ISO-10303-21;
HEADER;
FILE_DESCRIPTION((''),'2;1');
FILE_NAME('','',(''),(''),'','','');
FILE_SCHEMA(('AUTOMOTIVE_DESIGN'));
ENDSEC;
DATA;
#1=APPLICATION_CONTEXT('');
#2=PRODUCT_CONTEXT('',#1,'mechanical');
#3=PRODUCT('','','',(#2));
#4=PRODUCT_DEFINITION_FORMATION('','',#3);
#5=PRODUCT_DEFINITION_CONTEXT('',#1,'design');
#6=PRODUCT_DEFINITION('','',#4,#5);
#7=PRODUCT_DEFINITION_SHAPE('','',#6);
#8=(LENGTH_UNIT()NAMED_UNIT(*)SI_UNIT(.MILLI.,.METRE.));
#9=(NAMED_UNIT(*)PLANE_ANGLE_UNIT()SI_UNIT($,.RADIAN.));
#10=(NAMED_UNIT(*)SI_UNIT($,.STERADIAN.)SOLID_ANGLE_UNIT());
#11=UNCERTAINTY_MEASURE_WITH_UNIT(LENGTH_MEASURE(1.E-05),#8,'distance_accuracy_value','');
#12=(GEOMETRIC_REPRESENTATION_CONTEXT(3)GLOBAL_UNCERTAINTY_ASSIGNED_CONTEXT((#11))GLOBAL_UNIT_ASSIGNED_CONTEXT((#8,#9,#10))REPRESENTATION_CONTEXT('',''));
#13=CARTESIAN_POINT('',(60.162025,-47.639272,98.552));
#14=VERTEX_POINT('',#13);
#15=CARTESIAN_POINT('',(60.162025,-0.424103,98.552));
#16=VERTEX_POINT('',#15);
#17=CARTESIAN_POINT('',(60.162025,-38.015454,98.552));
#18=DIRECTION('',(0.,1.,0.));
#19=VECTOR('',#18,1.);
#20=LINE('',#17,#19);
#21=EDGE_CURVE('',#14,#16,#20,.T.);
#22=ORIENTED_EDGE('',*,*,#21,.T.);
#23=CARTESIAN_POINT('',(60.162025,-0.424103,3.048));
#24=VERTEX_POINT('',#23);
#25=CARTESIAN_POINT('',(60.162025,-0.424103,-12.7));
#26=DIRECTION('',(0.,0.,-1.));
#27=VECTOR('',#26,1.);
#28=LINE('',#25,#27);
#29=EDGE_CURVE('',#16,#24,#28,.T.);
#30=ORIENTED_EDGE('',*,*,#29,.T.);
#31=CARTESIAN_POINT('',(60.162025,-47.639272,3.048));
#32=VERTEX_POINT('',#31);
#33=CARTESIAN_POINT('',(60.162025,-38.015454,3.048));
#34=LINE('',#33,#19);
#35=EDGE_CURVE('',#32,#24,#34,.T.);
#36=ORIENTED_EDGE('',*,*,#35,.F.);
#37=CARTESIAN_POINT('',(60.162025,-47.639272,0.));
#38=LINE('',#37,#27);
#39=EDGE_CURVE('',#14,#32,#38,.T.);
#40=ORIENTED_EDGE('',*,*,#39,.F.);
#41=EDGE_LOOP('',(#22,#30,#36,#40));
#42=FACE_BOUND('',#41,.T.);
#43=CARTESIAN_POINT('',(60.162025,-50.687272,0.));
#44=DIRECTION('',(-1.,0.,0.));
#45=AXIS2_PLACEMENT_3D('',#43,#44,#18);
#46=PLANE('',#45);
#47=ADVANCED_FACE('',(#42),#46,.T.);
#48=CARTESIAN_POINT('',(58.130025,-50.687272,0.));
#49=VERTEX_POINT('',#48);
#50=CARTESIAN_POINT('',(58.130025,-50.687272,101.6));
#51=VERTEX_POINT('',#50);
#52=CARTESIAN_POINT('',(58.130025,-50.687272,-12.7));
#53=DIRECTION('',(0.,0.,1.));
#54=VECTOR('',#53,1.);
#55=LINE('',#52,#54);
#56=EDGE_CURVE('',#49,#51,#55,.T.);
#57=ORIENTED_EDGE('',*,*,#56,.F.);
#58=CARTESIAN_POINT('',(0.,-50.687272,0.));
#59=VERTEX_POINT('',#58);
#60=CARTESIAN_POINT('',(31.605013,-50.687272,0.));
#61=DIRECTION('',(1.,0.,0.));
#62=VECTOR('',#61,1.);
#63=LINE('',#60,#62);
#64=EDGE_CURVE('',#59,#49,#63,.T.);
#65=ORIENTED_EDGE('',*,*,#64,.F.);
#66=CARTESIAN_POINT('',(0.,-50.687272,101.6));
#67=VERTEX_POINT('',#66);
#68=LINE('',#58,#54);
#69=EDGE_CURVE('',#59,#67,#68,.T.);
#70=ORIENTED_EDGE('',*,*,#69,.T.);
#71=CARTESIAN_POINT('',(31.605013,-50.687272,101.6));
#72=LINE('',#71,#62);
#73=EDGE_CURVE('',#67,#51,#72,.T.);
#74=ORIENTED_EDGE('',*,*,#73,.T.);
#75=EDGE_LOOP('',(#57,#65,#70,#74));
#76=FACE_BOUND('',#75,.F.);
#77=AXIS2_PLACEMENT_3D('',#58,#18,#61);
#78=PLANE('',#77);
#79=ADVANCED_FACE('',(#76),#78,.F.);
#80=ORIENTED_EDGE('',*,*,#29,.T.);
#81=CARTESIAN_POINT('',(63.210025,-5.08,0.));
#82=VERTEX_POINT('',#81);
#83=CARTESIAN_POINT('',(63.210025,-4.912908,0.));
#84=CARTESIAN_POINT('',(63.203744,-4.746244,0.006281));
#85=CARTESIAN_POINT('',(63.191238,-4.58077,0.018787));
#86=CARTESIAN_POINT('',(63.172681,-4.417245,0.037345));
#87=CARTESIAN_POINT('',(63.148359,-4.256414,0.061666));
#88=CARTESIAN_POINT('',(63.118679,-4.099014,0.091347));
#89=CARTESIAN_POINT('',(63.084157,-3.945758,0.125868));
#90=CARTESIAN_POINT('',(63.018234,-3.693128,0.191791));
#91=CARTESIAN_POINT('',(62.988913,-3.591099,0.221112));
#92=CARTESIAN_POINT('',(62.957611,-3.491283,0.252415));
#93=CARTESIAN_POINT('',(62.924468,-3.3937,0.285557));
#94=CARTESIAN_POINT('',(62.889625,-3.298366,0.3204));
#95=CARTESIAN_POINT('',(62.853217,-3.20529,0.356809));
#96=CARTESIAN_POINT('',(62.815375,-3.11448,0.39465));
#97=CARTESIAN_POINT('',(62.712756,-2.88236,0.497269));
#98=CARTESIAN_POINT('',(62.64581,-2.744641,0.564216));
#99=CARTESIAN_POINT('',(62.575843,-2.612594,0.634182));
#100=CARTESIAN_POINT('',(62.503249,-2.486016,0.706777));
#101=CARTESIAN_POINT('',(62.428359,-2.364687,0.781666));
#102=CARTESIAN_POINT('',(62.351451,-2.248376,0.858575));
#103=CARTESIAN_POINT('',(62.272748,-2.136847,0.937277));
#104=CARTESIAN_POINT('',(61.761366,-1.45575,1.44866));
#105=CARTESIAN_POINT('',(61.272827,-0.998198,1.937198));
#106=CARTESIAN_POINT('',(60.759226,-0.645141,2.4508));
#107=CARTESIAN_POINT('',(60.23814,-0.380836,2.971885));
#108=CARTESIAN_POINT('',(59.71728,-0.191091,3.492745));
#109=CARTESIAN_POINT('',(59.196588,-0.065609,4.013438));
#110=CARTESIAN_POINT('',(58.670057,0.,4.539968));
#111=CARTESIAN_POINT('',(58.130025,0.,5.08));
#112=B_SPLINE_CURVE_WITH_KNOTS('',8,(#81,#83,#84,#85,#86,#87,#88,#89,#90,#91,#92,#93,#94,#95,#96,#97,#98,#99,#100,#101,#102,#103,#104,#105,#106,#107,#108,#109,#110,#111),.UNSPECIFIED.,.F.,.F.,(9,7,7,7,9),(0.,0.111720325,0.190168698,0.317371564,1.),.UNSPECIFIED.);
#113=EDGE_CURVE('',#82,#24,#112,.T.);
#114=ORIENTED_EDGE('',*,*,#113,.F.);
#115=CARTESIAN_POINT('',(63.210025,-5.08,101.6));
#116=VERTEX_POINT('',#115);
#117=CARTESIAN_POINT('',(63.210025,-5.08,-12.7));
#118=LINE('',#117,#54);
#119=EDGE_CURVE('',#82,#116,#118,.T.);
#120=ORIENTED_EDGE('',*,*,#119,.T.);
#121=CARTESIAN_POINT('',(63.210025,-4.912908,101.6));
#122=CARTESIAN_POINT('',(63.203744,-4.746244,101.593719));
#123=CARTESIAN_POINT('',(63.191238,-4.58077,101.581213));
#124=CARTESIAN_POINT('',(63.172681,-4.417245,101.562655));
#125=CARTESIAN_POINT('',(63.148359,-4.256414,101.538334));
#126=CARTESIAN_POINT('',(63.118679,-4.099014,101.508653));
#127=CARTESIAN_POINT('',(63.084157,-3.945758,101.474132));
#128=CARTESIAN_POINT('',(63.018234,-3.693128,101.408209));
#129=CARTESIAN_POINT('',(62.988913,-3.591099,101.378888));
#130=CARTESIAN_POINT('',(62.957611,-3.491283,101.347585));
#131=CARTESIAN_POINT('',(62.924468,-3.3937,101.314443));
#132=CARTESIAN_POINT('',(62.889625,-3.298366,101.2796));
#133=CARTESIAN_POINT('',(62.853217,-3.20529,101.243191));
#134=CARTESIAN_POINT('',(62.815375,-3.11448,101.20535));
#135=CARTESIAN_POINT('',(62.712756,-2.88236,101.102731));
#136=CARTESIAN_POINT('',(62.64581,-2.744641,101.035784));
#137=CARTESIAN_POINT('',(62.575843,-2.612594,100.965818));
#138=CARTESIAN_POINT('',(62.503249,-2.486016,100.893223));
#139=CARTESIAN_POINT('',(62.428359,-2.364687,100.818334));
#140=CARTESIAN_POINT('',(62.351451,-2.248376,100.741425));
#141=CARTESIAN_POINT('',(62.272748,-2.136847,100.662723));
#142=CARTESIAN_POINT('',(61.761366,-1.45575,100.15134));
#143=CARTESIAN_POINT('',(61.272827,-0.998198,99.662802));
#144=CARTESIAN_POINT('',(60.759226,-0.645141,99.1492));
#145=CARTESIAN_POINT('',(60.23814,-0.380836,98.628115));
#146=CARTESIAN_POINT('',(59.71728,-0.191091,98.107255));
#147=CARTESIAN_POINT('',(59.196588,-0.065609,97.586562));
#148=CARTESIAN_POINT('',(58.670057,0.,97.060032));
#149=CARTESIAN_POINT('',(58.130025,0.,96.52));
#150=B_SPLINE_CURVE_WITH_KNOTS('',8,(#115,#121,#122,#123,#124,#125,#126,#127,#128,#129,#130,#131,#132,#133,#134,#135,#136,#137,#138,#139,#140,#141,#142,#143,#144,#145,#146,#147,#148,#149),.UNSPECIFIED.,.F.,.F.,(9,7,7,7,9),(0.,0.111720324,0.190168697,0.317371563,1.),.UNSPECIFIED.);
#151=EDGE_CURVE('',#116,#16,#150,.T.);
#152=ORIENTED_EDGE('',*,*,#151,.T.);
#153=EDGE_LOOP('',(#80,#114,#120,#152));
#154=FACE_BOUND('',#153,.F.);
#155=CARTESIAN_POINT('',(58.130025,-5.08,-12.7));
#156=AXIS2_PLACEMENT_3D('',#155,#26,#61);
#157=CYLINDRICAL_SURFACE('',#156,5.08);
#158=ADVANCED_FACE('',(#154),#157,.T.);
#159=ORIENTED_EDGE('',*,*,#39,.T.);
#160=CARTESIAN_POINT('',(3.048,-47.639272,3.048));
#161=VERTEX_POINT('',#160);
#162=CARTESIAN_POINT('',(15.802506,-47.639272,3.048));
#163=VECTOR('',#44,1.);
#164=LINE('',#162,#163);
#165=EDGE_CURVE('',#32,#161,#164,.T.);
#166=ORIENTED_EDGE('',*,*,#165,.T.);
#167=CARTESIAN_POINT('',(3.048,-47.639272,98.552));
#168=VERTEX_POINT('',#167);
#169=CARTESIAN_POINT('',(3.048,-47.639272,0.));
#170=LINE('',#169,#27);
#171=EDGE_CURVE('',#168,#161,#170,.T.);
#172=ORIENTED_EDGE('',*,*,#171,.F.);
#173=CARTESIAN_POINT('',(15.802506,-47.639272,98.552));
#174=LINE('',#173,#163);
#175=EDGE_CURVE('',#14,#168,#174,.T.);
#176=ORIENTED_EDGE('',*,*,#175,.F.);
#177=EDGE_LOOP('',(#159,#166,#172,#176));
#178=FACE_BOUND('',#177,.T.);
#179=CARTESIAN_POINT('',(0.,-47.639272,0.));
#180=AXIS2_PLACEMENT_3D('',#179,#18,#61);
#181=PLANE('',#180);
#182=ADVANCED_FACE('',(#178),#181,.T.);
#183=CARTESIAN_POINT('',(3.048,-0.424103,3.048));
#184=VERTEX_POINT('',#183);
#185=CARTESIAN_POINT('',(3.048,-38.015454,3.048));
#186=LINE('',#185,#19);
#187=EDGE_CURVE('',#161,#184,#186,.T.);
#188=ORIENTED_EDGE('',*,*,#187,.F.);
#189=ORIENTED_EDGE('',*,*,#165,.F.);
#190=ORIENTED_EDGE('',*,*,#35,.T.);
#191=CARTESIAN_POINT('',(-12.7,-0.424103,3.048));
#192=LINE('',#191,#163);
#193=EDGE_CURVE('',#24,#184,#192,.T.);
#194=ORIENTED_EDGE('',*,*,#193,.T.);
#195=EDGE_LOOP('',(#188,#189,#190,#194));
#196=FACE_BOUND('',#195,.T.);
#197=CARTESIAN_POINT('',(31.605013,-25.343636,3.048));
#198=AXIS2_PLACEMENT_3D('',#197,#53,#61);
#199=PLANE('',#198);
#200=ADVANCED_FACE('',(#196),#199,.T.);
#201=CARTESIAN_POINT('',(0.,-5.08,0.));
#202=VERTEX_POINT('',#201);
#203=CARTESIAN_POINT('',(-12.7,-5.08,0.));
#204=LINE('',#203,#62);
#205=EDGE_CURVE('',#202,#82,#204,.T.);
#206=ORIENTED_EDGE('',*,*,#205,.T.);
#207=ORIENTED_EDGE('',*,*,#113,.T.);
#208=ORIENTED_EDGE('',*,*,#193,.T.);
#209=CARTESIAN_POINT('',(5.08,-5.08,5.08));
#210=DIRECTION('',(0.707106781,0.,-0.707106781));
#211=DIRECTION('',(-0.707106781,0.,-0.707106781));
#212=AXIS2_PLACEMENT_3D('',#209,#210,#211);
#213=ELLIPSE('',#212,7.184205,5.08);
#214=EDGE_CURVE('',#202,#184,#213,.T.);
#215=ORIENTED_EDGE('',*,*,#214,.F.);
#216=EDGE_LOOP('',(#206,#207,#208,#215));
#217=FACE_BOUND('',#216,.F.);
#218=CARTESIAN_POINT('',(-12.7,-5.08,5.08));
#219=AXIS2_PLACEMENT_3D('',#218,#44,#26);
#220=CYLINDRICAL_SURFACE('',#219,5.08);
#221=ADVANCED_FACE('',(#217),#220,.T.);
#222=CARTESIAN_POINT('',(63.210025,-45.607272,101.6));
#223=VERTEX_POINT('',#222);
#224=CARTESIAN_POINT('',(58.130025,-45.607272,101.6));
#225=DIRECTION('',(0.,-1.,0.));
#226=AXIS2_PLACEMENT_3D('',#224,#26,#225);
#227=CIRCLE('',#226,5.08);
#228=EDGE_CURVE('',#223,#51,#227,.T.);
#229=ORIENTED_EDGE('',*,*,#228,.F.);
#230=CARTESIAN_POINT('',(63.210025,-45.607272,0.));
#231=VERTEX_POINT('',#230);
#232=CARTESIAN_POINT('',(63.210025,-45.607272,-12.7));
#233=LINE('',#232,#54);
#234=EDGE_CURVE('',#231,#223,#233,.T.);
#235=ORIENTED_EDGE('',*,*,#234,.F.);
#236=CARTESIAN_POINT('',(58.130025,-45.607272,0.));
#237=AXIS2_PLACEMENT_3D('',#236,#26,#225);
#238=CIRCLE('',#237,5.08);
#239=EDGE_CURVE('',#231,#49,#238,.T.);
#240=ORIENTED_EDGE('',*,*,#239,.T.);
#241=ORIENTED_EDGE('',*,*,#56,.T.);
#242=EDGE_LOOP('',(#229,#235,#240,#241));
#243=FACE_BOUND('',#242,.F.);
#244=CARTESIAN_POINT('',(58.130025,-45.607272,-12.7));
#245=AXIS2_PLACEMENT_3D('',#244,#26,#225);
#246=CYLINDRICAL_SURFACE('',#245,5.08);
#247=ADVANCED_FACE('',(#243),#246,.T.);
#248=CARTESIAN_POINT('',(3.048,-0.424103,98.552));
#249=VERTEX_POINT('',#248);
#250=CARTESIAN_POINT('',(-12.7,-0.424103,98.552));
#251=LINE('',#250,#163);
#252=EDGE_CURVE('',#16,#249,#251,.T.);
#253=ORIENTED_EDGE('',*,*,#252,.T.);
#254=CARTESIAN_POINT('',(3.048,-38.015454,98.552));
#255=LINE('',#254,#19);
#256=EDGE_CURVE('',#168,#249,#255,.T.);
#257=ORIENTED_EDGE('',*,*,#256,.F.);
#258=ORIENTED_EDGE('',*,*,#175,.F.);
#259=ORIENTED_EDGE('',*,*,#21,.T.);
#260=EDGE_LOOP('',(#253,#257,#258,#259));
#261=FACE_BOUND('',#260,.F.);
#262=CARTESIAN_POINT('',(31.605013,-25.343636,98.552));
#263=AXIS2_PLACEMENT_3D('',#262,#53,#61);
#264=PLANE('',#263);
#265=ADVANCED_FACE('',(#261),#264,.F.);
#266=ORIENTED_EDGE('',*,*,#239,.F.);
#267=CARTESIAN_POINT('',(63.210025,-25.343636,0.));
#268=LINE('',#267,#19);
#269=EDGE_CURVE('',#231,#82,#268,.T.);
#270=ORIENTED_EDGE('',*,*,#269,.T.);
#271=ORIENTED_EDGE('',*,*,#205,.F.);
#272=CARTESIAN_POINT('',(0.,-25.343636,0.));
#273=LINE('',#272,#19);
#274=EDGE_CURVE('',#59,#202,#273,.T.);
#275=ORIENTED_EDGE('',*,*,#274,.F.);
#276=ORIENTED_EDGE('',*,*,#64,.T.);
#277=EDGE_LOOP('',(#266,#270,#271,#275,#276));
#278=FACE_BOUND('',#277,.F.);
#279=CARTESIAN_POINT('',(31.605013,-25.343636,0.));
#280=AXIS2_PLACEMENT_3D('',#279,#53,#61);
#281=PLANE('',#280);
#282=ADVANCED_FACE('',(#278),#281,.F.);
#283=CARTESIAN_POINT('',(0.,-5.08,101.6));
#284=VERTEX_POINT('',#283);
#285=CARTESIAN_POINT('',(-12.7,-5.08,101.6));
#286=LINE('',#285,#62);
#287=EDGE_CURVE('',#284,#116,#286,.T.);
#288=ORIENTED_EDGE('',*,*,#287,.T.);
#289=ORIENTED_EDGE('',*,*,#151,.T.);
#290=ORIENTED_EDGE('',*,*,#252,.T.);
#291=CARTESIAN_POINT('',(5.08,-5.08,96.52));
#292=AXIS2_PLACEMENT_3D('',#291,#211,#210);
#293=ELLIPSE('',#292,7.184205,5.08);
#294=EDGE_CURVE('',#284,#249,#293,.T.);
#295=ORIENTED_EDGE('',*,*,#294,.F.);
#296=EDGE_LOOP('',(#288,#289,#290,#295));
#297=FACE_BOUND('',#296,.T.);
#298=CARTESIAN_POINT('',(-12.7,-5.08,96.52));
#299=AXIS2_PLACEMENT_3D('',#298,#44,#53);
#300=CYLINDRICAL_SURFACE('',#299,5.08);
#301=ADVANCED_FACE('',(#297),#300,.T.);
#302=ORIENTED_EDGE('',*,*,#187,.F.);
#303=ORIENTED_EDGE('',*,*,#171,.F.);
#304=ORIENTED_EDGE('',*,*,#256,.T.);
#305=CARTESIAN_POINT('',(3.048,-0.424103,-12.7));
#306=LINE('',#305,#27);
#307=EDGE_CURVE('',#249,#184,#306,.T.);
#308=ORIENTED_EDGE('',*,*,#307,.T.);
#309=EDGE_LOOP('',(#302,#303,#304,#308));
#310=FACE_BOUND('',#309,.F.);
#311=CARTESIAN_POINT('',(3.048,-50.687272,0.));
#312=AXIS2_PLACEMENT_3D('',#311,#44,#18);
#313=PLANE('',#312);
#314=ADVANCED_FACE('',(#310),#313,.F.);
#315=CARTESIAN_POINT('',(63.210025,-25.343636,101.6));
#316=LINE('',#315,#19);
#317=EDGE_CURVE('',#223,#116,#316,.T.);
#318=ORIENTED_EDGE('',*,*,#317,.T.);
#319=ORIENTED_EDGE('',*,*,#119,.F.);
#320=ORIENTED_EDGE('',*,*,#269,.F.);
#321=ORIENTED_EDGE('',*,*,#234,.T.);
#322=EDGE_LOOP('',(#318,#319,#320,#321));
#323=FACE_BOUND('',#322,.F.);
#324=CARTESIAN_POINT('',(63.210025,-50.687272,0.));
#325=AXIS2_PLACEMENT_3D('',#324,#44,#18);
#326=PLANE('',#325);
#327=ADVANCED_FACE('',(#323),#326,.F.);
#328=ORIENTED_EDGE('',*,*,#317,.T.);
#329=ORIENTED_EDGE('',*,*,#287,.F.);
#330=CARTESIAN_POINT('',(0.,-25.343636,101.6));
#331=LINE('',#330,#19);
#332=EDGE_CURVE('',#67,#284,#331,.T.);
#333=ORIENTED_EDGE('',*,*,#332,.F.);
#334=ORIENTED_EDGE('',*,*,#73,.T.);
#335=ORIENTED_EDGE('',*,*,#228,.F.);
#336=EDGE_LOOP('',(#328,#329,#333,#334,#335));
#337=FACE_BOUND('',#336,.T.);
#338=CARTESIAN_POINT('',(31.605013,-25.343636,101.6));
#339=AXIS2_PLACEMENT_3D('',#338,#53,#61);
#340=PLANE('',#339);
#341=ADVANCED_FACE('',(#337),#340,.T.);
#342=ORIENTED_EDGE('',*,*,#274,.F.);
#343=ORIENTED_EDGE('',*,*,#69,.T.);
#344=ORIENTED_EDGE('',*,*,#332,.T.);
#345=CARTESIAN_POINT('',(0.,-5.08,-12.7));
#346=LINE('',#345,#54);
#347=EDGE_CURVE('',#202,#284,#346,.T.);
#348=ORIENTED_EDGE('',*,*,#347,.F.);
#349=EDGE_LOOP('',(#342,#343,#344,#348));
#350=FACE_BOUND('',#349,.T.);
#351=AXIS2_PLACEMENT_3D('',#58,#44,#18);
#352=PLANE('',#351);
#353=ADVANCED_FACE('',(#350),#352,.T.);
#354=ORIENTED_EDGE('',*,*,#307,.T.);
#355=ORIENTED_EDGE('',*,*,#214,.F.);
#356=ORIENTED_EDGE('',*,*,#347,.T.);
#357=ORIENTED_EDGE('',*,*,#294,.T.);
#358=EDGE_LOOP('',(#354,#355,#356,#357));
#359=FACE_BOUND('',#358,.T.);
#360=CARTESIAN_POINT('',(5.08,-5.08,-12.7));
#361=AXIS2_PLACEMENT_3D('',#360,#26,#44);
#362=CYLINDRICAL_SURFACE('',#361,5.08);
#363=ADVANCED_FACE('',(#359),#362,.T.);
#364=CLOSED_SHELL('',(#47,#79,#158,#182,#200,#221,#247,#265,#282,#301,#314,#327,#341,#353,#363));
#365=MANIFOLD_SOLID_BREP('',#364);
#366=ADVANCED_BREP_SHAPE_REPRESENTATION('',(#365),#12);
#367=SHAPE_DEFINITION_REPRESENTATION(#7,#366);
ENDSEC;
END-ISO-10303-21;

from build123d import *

# Parameters (mm, degrees)
F0_W        = 63.2100254297
F0_H        = 50.6872721016
F1_DEPTH    = 101.6
F2_T        = -3.048
F3_T1_DEPTH = 127
F3_T3_DEPTH = 88.6100254297


# Not quite as in the source:
# - a fillet or chamfer that OpenCascade refuses, or shapes differently, is made with other operations: its cross-section is extruded or revolved along the edge and cut away or added


with BuildPart() as f1:
    # F0 (on Top) → F1 (new body)
    with BuildSketch(Plane.XY):
        with Locations((31.6050127149, -25.3436360508)):
            Rectangle(F0_W, F0_H)
    extrude(amount=F1_DEPTH)

    # F2
    f2_openings = [f1.faces().sort_by_distance(p)[0] for p in [
        (31.605013, 0, 50.8),
    ]]
    offset(amount=F2_T, openings=f2_openings)

    # F3: fillet of radius 5.08 on 5 edges, made by hand

    # F3_s2 → F3_t1 (cut)
    with BuildSketch(Plane.XY.offset(-12.7)):
        with BuildLine():
            ThreePointArc((0, -5.08), (1.4878975516, -1.4878975516), (5.08, 0))
            Line((5.08, 0), (0, 0))
            Line((0, 0), (0, -5.08))
        make_face()
        with BuildLine():
            ThreePointArc((63.2100254297, -5.08), (61.7221278782, -1.4878975516), (58.1300254297, 0))
            Line((58.1300254297, 0), (63.2100254297, 0))
            Line((63.2100254297, 0), (63.2100254297, -5.08))
        make_face()
        with BuildLine():
            ThreePointArc((58.1300254297, -50.6872721016), (61.7221278782, -49.1993745501), (63.2100254297, -45.6072721016))
            Line((63.2100254297, -45.6072721016), (63.2100254297, -50.6872721016))
            Line((63.2100254297, -50.6872721016), (58.1300254297, -50.6872721016))
        make_face()
    extrude(amount=F3_T1_DEPTH, mode=Mode.SUBTRACT)

    # F3_s4 → F3_t3 (cut)
    with BuildSketch(Plane.YZ.offset(-12.7)):
        with BuildLine():
            ThreePointArc((-5.08, 101.6), (-1.4878975516, 100.1121024484), (0, 96.52))
            Line((0, 96.52), (0, 101.6))
            Line((0, 101.6), (-5.08, 101.6))
        make_face()
        with BuildLine():
            ThreePointArc((-5.08, 0), (-1.4878975516, 1.4878975516), (0, 5.08))
            Line((0, 5.08), (0, 0))
            Line((0, 0), (-5.08, 0))
        make_face()
    extrude(amount=F3_T3_DEPTH, mode=Mode.SUBTRACT)


solid = f1.part
